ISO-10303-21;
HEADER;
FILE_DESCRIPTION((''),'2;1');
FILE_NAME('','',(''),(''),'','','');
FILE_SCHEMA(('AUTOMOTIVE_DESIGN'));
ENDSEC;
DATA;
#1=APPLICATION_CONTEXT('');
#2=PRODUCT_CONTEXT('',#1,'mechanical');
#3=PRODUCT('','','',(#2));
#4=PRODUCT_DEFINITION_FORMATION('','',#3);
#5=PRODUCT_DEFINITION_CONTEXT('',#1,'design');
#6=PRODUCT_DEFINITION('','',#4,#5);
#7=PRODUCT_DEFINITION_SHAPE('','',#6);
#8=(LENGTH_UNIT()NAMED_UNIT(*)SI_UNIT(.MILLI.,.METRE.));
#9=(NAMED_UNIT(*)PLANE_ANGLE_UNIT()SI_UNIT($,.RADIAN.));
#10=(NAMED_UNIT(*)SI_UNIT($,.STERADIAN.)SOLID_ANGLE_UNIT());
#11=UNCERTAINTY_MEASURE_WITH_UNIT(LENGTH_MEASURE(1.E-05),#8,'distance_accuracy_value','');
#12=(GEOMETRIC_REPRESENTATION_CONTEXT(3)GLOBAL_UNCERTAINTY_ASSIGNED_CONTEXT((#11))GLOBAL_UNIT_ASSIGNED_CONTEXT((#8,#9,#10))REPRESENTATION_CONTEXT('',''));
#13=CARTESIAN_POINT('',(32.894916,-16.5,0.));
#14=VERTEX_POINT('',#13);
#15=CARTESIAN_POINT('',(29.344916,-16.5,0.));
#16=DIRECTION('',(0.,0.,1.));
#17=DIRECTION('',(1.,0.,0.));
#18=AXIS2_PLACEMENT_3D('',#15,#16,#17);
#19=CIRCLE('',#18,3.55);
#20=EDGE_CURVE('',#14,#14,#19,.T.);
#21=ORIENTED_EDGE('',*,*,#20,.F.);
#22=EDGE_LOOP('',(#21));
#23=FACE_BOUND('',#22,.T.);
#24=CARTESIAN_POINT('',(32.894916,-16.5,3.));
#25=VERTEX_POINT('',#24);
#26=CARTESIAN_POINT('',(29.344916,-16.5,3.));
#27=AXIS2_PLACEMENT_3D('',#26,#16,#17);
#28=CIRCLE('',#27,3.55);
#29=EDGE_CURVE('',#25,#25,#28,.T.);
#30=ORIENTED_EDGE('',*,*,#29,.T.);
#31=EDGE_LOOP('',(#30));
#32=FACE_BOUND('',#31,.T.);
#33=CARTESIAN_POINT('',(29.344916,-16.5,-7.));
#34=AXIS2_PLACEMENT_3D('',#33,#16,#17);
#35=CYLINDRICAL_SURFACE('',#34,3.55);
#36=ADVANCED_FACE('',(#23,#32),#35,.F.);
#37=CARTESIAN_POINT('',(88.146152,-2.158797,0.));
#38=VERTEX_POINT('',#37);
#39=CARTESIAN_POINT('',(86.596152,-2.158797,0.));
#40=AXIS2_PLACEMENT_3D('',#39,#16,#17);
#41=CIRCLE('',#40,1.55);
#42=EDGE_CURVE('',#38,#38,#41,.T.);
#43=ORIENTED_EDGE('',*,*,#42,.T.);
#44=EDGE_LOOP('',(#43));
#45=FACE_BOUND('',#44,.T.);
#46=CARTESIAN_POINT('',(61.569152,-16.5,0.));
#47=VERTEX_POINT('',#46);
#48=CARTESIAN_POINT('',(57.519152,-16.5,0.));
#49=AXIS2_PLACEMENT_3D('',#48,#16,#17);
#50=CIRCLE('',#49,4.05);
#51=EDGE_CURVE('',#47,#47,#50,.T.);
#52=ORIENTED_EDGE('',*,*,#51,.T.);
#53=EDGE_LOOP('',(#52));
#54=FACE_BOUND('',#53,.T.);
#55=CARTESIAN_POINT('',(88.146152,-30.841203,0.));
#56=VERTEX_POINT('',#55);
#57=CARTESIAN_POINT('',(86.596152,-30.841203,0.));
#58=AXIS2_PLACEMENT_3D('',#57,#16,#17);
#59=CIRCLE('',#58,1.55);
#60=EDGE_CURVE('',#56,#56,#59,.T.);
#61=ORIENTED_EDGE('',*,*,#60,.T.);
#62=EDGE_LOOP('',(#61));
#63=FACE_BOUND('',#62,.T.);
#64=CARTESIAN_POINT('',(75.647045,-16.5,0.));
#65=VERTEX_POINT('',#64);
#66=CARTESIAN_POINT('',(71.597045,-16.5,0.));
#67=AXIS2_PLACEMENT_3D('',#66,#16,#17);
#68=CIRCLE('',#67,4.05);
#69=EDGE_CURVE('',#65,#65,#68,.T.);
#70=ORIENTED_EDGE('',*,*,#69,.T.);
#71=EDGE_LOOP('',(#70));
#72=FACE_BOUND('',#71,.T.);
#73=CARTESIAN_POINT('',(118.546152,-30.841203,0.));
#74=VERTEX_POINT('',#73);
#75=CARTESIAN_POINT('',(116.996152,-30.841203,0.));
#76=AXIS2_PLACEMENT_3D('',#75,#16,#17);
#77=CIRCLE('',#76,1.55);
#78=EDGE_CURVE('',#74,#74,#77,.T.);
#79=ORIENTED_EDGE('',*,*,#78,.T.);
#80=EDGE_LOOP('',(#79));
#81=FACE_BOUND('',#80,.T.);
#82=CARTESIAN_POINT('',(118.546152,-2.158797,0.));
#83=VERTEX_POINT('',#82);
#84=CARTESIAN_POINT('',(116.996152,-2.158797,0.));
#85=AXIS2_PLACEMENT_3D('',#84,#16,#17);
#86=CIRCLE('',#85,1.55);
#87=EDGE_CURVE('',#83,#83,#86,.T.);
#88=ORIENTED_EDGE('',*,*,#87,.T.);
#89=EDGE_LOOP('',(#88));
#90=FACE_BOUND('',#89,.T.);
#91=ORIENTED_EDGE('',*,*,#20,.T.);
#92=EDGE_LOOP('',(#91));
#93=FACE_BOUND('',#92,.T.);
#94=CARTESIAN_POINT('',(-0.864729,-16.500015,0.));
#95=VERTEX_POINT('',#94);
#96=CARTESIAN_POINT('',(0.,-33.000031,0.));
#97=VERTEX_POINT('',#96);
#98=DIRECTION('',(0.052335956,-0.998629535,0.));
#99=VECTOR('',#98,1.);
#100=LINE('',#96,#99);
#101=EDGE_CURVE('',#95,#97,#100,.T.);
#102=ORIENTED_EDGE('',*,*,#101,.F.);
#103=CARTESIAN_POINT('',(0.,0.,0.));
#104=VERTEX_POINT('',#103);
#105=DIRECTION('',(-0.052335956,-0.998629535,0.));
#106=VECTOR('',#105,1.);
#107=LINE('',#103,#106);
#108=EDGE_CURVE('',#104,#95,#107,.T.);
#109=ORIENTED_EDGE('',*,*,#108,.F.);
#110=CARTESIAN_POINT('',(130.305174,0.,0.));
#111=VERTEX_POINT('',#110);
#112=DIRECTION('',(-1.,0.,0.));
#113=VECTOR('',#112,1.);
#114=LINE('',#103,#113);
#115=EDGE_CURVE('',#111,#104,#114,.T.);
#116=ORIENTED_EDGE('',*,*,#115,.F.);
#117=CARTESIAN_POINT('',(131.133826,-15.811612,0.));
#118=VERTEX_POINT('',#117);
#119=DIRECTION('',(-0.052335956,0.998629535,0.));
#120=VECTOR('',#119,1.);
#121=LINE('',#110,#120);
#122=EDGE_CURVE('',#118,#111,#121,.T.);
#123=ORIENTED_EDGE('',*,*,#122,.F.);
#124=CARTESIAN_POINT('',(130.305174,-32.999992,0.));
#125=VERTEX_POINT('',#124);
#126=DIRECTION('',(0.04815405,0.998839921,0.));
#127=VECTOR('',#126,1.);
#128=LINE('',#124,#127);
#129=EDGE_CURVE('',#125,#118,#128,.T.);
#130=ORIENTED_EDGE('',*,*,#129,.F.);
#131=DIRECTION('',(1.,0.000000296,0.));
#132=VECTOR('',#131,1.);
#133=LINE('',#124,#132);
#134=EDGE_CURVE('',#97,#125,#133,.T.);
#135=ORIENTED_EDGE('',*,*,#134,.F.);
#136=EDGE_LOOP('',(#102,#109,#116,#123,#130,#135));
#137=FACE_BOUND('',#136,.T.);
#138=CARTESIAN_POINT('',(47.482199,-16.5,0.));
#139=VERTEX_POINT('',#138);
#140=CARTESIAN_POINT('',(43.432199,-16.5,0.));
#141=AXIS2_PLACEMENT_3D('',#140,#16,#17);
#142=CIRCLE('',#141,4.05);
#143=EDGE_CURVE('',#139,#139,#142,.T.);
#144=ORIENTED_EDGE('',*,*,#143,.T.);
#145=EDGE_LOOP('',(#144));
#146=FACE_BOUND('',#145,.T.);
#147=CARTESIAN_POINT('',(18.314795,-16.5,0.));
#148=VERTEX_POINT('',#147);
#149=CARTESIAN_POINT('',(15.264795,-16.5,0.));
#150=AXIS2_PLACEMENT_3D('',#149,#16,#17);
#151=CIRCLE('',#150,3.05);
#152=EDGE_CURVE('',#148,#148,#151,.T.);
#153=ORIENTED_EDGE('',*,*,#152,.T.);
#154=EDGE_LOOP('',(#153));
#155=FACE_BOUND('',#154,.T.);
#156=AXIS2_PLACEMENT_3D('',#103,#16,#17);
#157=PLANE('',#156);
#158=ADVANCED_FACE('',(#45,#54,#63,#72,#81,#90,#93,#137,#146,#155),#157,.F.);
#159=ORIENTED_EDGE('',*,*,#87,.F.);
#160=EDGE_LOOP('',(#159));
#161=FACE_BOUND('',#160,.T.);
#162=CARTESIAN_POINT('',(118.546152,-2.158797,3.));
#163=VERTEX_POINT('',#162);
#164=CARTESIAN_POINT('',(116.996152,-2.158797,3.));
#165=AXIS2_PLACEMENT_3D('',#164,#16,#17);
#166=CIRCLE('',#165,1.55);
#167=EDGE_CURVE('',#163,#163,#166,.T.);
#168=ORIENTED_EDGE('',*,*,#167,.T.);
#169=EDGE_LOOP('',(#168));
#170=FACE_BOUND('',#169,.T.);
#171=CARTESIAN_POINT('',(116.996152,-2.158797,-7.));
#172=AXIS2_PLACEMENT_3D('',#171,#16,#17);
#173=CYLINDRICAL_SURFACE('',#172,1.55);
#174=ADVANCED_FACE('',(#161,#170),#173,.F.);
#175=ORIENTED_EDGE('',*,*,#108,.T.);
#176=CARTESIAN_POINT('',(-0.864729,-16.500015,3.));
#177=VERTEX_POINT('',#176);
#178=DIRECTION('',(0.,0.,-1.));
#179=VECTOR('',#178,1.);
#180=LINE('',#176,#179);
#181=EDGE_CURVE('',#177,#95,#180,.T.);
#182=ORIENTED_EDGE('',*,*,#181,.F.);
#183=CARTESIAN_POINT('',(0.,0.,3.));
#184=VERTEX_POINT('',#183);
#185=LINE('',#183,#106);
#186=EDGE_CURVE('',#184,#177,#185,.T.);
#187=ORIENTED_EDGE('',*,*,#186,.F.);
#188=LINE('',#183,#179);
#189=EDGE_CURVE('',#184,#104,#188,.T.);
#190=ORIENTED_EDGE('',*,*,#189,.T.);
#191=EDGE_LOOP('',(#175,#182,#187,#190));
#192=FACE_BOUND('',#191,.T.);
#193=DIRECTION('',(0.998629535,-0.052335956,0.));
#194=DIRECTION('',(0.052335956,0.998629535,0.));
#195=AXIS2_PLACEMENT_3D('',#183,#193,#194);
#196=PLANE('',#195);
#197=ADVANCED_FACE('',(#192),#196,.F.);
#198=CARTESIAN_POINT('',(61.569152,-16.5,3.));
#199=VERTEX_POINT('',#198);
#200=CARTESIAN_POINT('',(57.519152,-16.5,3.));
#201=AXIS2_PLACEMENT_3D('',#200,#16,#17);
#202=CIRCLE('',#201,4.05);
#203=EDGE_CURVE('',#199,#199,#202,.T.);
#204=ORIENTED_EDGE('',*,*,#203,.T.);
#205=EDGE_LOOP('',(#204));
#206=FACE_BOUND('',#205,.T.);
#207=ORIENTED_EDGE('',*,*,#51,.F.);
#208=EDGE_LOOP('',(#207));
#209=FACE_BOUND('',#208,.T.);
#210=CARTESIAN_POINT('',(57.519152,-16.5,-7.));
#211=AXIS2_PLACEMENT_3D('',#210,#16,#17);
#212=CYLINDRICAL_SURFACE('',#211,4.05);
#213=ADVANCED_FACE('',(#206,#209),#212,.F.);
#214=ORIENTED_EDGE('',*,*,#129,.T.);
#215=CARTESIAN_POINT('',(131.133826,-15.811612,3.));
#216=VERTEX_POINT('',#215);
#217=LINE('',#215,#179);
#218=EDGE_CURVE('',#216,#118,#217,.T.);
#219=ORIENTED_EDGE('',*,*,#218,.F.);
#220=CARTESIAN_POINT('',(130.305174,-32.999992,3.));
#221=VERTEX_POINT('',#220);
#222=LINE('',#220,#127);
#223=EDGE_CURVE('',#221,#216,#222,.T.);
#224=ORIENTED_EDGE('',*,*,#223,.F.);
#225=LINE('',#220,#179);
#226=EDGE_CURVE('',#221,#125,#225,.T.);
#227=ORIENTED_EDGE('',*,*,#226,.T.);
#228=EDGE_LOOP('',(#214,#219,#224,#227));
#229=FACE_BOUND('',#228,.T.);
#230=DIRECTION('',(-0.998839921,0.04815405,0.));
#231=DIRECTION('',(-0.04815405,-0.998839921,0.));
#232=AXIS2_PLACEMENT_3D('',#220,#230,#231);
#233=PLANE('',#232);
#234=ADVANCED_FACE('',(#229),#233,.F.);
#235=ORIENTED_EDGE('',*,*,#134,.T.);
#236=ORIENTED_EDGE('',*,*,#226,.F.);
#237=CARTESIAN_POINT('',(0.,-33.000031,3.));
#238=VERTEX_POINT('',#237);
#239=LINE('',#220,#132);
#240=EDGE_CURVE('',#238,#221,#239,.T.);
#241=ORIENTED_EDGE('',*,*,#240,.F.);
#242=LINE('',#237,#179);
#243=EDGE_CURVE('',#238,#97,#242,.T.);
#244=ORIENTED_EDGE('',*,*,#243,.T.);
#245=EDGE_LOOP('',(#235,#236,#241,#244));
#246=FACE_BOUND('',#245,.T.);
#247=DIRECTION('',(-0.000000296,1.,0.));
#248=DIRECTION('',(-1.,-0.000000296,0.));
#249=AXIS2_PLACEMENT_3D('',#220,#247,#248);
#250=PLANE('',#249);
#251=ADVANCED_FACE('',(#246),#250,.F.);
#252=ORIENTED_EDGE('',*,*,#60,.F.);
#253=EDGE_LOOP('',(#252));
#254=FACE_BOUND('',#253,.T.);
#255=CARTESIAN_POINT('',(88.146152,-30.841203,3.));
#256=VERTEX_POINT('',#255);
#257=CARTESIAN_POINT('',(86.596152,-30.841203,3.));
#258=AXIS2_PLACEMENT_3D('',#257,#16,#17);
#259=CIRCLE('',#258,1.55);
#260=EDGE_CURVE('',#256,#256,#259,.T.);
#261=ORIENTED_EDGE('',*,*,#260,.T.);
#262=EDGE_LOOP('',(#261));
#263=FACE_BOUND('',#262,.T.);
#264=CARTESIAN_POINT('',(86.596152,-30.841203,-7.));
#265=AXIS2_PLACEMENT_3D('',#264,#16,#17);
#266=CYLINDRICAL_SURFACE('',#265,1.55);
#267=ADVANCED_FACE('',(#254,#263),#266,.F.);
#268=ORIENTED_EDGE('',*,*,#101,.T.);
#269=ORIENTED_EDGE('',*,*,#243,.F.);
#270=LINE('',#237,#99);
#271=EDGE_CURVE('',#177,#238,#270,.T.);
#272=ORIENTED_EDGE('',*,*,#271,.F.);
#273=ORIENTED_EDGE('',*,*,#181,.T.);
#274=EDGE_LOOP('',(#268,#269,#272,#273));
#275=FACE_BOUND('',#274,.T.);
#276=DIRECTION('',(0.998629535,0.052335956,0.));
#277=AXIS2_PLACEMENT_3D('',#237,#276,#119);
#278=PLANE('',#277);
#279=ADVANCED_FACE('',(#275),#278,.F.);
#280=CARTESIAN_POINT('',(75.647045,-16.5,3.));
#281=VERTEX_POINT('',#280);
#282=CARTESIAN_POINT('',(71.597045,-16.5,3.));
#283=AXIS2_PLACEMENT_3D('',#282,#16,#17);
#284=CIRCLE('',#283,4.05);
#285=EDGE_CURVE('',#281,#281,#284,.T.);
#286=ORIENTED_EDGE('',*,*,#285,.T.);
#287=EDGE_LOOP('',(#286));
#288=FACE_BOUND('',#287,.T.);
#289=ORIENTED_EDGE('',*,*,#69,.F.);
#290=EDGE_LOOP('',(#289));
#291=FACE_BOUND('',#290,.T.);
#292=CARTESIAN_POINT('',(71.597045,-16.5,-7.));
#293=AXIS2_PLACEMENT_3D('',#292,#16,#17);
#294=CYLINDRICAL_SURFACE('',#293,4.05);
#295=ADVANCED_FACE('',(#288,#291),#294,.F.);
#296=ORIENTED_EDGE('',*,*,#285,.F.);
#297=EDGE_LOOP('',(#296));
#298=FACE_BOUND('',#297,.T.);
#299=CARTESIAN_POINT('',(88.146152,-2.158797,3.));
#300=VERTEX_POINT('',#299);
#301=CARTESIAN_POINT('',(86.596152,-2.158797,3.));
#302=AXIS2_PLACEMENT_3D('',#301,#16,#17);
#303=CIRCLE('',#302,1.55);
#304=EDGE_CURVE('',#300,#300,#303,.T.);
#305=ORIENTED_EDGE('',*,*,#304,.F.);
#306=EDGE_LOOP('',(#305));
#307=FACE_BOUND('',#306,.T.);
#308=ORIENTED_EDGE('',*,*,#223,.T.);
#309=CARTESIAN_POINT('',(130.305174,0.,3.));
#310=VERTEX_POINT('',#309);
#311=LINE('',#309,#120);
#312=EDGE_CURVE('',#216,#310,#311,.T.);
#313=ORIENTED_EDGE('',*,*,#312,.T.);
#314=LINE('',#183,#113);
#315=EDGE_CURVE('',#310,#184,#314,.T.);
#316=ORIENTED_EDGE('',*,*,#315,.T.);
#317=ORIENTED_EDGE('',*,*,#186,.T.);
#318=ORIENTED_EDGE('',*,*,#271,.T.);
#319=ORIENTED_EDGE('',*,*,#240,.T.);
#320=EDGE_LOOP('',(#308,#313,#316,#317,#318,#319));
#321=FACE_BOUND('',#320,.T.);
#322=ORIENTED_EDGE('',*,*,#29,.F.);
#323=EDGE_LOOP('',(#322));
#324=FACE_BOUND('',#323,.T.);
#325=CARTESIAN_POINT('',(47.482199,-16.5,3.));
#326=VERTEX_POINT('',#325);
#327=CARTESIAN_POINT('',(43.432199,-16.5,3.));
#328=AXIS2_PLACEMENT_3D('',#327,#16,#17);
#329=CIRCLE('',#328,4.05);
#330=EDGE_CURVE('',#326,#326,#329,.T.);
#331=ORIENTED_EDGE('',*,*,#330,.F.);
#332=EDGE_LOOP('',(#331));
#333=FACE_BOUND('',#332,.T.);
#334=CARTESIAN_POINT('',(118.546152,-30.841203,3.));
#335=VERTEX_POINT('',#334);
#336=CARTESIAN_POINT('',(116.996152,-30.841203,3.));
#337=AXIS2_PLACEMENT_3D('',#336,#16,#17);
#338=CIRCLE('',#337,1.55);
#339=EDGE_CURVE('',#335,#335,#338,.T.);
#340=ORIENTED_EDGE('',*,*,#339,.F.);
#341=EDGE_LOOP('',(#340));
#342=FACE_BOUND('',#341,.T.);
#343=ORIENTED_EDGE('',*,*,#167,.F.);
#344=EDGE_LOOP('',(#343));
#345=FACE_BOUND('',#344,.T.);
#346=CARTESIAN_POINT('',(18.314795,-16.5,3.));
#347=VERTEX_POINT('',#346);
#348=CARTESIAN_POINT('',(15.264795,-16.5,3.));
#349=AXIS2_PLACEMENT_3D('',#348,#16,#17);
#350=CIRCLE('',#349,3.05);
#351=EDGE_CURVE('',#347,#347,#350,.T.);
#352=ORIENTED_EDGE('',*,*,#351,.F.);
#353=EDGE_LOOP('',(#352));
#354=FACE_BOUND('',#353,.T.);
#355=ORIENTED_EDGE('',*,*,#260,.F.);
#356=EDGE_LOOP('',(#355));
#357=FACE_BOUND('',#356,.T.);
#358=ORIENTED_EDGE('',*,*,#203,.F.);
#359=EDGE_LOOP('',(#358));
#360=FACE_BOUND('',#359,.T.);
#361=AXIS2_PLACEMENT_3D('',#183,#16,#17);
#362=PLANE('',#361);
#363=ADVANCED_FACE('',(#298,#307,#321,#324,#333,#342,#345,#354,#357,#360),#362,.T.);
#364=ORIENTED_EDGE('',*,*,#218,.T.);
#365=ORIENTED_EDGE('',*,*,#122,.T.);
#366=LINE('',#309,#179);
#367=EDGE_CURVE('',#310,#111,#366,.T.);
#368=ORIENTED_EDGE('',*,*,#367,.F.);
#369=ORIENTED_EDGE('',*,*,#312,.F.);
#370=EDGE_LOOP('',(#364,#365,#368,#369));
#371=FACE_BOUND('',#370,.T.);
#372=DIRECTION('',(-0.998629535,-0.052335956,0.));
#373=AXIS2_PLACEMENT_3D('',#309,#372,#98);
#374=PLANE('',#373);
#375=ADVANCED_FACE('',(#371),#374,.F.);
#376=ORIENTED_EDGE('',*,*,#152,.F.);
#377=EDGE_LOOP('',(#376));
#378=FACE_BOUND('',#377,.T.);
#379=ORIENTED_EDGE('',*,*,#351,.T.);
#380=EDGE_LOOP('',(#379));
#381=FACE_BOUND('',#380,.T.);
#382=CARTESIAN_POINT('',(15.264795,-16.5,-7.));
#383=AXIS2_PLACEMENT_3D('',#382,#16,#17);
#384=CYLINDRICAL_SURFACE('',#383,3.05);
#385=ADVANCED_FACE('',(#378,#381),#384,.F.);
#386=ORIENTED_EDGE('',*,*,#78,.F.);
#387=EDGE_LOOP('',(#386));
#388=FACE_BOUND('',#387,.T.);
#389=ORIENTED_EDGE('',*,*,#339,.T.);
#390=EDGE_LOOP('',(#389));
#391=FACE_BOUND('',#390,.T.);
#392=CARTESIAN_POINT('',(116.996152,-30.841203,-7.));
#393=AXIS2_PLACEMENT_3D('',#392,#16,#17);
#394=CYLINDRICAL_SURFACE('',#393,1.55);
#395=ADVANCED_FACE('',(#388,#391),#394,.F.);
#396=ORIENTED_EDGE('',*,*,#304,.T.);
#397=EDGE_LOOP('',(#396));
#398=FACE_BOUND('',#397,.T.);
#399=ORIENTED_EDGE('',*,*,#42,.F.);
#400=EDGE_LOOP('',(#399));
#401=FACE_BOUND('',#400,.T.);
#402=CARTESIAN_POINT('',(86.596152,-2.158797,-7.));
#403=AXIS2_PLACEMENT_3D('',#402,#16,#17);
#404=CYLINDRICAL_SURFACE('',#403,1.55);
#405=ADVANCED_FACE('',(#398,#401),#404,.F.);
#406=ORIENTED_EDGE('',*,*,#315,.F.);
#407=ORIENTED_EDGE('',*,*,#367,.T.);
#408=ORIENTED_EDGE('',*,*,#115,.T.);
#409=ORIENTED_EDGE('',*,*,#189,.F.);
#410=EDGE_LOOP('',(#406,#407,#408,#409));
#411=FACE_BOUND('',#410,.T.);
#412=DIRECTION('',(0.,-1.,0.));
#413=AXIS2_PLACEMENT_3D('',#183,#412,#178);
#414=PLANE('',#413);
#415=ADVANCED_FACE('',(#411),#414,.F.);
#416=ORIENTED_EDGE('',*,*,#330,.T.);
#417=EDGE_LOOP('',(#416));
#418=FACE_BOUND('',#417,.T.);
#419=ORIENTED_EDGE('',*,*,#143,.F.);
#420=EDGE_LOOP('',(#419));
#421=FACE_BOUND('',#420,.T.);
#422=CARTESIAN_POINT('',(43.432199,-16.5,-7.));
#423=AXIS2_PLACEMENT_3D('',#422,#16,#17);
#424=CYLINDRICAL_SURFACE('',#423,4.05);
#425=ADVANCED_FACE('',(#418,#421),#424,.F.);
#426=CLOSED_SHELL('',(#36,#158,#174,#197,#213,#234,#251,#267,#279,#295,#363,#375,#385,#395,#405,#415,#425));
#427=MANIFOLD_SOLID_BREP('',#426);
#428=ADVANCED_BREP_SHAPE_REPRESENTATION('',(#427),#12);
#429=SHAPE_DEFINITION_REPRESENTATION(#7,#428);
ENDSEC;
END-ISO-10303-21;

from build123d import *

# Parameters (mm, degrees)
BOSS_EXTRUDE1_DEPTH = 3
ESBO_O1_R           = 3.05
ESBO_O1_R_2         = 3.55
ESBO_O1_R_3         = 4.05
ESBO_O1_R_4         = 1.55
CUT_EXTRUDE2_DEPTH  = 10


# Read off the part's stored shape, not the designer's step: Boss-Extrude1
with BuildPart() as part:
    # Boss-Extrude1 outline → Boss-Extrude1 (new body)
    with BuildSketch(Plane.XY):
        Polygon((0, 0), (-0.86472917, -16.500015494), (0, -33.000030988), (130.305174389, -32.999992472), (131.13382584, -15.81161159), (130.305174389, 0), align=None)
    extrude(amount=BOSS_EXTRUDE1_DEPTH)

    # Esboço1 → Cut-Extrude2 (cut)
    with BuildSketch(Plane.XY.offset(3)):
        with Locations((15.264794979, -16.500000001)):
            Circle(ESBO_O1_R)
        with Locations((29.34491573, -16.500000001)):
            Circle(ESBO_O1_R_2)
        with Locations((43.432199078, -16.500000001)):
            Circle(ESBO_O1_R_3)
        with Locations((57.519151999, -16.500000001)):
            Circle(ESBO_O1_R_3)
        with Locations((71.597045458, -16.500000001)):
            Circle(ESBO_O1_R_3)
        with Locations((86.59615234, -2.1587967)):
            Circle(ESBO_O1_R_4)
        with Locations((116.99615234, -2.1587967)):
            Circle(ESBO_O1_R_4)
        with Locations((86.59615234, -30.8412033)):
            Circle(ESBO_O1_R_4)
        with Locations((116.99615234, -30.8412033)):
            Circle(ESBO_O1_R_4)
    extrude(amount=-CUT_EXTRUDE2_DEPTH, mode=Mode.SUBTRACT)


solid = part.part
